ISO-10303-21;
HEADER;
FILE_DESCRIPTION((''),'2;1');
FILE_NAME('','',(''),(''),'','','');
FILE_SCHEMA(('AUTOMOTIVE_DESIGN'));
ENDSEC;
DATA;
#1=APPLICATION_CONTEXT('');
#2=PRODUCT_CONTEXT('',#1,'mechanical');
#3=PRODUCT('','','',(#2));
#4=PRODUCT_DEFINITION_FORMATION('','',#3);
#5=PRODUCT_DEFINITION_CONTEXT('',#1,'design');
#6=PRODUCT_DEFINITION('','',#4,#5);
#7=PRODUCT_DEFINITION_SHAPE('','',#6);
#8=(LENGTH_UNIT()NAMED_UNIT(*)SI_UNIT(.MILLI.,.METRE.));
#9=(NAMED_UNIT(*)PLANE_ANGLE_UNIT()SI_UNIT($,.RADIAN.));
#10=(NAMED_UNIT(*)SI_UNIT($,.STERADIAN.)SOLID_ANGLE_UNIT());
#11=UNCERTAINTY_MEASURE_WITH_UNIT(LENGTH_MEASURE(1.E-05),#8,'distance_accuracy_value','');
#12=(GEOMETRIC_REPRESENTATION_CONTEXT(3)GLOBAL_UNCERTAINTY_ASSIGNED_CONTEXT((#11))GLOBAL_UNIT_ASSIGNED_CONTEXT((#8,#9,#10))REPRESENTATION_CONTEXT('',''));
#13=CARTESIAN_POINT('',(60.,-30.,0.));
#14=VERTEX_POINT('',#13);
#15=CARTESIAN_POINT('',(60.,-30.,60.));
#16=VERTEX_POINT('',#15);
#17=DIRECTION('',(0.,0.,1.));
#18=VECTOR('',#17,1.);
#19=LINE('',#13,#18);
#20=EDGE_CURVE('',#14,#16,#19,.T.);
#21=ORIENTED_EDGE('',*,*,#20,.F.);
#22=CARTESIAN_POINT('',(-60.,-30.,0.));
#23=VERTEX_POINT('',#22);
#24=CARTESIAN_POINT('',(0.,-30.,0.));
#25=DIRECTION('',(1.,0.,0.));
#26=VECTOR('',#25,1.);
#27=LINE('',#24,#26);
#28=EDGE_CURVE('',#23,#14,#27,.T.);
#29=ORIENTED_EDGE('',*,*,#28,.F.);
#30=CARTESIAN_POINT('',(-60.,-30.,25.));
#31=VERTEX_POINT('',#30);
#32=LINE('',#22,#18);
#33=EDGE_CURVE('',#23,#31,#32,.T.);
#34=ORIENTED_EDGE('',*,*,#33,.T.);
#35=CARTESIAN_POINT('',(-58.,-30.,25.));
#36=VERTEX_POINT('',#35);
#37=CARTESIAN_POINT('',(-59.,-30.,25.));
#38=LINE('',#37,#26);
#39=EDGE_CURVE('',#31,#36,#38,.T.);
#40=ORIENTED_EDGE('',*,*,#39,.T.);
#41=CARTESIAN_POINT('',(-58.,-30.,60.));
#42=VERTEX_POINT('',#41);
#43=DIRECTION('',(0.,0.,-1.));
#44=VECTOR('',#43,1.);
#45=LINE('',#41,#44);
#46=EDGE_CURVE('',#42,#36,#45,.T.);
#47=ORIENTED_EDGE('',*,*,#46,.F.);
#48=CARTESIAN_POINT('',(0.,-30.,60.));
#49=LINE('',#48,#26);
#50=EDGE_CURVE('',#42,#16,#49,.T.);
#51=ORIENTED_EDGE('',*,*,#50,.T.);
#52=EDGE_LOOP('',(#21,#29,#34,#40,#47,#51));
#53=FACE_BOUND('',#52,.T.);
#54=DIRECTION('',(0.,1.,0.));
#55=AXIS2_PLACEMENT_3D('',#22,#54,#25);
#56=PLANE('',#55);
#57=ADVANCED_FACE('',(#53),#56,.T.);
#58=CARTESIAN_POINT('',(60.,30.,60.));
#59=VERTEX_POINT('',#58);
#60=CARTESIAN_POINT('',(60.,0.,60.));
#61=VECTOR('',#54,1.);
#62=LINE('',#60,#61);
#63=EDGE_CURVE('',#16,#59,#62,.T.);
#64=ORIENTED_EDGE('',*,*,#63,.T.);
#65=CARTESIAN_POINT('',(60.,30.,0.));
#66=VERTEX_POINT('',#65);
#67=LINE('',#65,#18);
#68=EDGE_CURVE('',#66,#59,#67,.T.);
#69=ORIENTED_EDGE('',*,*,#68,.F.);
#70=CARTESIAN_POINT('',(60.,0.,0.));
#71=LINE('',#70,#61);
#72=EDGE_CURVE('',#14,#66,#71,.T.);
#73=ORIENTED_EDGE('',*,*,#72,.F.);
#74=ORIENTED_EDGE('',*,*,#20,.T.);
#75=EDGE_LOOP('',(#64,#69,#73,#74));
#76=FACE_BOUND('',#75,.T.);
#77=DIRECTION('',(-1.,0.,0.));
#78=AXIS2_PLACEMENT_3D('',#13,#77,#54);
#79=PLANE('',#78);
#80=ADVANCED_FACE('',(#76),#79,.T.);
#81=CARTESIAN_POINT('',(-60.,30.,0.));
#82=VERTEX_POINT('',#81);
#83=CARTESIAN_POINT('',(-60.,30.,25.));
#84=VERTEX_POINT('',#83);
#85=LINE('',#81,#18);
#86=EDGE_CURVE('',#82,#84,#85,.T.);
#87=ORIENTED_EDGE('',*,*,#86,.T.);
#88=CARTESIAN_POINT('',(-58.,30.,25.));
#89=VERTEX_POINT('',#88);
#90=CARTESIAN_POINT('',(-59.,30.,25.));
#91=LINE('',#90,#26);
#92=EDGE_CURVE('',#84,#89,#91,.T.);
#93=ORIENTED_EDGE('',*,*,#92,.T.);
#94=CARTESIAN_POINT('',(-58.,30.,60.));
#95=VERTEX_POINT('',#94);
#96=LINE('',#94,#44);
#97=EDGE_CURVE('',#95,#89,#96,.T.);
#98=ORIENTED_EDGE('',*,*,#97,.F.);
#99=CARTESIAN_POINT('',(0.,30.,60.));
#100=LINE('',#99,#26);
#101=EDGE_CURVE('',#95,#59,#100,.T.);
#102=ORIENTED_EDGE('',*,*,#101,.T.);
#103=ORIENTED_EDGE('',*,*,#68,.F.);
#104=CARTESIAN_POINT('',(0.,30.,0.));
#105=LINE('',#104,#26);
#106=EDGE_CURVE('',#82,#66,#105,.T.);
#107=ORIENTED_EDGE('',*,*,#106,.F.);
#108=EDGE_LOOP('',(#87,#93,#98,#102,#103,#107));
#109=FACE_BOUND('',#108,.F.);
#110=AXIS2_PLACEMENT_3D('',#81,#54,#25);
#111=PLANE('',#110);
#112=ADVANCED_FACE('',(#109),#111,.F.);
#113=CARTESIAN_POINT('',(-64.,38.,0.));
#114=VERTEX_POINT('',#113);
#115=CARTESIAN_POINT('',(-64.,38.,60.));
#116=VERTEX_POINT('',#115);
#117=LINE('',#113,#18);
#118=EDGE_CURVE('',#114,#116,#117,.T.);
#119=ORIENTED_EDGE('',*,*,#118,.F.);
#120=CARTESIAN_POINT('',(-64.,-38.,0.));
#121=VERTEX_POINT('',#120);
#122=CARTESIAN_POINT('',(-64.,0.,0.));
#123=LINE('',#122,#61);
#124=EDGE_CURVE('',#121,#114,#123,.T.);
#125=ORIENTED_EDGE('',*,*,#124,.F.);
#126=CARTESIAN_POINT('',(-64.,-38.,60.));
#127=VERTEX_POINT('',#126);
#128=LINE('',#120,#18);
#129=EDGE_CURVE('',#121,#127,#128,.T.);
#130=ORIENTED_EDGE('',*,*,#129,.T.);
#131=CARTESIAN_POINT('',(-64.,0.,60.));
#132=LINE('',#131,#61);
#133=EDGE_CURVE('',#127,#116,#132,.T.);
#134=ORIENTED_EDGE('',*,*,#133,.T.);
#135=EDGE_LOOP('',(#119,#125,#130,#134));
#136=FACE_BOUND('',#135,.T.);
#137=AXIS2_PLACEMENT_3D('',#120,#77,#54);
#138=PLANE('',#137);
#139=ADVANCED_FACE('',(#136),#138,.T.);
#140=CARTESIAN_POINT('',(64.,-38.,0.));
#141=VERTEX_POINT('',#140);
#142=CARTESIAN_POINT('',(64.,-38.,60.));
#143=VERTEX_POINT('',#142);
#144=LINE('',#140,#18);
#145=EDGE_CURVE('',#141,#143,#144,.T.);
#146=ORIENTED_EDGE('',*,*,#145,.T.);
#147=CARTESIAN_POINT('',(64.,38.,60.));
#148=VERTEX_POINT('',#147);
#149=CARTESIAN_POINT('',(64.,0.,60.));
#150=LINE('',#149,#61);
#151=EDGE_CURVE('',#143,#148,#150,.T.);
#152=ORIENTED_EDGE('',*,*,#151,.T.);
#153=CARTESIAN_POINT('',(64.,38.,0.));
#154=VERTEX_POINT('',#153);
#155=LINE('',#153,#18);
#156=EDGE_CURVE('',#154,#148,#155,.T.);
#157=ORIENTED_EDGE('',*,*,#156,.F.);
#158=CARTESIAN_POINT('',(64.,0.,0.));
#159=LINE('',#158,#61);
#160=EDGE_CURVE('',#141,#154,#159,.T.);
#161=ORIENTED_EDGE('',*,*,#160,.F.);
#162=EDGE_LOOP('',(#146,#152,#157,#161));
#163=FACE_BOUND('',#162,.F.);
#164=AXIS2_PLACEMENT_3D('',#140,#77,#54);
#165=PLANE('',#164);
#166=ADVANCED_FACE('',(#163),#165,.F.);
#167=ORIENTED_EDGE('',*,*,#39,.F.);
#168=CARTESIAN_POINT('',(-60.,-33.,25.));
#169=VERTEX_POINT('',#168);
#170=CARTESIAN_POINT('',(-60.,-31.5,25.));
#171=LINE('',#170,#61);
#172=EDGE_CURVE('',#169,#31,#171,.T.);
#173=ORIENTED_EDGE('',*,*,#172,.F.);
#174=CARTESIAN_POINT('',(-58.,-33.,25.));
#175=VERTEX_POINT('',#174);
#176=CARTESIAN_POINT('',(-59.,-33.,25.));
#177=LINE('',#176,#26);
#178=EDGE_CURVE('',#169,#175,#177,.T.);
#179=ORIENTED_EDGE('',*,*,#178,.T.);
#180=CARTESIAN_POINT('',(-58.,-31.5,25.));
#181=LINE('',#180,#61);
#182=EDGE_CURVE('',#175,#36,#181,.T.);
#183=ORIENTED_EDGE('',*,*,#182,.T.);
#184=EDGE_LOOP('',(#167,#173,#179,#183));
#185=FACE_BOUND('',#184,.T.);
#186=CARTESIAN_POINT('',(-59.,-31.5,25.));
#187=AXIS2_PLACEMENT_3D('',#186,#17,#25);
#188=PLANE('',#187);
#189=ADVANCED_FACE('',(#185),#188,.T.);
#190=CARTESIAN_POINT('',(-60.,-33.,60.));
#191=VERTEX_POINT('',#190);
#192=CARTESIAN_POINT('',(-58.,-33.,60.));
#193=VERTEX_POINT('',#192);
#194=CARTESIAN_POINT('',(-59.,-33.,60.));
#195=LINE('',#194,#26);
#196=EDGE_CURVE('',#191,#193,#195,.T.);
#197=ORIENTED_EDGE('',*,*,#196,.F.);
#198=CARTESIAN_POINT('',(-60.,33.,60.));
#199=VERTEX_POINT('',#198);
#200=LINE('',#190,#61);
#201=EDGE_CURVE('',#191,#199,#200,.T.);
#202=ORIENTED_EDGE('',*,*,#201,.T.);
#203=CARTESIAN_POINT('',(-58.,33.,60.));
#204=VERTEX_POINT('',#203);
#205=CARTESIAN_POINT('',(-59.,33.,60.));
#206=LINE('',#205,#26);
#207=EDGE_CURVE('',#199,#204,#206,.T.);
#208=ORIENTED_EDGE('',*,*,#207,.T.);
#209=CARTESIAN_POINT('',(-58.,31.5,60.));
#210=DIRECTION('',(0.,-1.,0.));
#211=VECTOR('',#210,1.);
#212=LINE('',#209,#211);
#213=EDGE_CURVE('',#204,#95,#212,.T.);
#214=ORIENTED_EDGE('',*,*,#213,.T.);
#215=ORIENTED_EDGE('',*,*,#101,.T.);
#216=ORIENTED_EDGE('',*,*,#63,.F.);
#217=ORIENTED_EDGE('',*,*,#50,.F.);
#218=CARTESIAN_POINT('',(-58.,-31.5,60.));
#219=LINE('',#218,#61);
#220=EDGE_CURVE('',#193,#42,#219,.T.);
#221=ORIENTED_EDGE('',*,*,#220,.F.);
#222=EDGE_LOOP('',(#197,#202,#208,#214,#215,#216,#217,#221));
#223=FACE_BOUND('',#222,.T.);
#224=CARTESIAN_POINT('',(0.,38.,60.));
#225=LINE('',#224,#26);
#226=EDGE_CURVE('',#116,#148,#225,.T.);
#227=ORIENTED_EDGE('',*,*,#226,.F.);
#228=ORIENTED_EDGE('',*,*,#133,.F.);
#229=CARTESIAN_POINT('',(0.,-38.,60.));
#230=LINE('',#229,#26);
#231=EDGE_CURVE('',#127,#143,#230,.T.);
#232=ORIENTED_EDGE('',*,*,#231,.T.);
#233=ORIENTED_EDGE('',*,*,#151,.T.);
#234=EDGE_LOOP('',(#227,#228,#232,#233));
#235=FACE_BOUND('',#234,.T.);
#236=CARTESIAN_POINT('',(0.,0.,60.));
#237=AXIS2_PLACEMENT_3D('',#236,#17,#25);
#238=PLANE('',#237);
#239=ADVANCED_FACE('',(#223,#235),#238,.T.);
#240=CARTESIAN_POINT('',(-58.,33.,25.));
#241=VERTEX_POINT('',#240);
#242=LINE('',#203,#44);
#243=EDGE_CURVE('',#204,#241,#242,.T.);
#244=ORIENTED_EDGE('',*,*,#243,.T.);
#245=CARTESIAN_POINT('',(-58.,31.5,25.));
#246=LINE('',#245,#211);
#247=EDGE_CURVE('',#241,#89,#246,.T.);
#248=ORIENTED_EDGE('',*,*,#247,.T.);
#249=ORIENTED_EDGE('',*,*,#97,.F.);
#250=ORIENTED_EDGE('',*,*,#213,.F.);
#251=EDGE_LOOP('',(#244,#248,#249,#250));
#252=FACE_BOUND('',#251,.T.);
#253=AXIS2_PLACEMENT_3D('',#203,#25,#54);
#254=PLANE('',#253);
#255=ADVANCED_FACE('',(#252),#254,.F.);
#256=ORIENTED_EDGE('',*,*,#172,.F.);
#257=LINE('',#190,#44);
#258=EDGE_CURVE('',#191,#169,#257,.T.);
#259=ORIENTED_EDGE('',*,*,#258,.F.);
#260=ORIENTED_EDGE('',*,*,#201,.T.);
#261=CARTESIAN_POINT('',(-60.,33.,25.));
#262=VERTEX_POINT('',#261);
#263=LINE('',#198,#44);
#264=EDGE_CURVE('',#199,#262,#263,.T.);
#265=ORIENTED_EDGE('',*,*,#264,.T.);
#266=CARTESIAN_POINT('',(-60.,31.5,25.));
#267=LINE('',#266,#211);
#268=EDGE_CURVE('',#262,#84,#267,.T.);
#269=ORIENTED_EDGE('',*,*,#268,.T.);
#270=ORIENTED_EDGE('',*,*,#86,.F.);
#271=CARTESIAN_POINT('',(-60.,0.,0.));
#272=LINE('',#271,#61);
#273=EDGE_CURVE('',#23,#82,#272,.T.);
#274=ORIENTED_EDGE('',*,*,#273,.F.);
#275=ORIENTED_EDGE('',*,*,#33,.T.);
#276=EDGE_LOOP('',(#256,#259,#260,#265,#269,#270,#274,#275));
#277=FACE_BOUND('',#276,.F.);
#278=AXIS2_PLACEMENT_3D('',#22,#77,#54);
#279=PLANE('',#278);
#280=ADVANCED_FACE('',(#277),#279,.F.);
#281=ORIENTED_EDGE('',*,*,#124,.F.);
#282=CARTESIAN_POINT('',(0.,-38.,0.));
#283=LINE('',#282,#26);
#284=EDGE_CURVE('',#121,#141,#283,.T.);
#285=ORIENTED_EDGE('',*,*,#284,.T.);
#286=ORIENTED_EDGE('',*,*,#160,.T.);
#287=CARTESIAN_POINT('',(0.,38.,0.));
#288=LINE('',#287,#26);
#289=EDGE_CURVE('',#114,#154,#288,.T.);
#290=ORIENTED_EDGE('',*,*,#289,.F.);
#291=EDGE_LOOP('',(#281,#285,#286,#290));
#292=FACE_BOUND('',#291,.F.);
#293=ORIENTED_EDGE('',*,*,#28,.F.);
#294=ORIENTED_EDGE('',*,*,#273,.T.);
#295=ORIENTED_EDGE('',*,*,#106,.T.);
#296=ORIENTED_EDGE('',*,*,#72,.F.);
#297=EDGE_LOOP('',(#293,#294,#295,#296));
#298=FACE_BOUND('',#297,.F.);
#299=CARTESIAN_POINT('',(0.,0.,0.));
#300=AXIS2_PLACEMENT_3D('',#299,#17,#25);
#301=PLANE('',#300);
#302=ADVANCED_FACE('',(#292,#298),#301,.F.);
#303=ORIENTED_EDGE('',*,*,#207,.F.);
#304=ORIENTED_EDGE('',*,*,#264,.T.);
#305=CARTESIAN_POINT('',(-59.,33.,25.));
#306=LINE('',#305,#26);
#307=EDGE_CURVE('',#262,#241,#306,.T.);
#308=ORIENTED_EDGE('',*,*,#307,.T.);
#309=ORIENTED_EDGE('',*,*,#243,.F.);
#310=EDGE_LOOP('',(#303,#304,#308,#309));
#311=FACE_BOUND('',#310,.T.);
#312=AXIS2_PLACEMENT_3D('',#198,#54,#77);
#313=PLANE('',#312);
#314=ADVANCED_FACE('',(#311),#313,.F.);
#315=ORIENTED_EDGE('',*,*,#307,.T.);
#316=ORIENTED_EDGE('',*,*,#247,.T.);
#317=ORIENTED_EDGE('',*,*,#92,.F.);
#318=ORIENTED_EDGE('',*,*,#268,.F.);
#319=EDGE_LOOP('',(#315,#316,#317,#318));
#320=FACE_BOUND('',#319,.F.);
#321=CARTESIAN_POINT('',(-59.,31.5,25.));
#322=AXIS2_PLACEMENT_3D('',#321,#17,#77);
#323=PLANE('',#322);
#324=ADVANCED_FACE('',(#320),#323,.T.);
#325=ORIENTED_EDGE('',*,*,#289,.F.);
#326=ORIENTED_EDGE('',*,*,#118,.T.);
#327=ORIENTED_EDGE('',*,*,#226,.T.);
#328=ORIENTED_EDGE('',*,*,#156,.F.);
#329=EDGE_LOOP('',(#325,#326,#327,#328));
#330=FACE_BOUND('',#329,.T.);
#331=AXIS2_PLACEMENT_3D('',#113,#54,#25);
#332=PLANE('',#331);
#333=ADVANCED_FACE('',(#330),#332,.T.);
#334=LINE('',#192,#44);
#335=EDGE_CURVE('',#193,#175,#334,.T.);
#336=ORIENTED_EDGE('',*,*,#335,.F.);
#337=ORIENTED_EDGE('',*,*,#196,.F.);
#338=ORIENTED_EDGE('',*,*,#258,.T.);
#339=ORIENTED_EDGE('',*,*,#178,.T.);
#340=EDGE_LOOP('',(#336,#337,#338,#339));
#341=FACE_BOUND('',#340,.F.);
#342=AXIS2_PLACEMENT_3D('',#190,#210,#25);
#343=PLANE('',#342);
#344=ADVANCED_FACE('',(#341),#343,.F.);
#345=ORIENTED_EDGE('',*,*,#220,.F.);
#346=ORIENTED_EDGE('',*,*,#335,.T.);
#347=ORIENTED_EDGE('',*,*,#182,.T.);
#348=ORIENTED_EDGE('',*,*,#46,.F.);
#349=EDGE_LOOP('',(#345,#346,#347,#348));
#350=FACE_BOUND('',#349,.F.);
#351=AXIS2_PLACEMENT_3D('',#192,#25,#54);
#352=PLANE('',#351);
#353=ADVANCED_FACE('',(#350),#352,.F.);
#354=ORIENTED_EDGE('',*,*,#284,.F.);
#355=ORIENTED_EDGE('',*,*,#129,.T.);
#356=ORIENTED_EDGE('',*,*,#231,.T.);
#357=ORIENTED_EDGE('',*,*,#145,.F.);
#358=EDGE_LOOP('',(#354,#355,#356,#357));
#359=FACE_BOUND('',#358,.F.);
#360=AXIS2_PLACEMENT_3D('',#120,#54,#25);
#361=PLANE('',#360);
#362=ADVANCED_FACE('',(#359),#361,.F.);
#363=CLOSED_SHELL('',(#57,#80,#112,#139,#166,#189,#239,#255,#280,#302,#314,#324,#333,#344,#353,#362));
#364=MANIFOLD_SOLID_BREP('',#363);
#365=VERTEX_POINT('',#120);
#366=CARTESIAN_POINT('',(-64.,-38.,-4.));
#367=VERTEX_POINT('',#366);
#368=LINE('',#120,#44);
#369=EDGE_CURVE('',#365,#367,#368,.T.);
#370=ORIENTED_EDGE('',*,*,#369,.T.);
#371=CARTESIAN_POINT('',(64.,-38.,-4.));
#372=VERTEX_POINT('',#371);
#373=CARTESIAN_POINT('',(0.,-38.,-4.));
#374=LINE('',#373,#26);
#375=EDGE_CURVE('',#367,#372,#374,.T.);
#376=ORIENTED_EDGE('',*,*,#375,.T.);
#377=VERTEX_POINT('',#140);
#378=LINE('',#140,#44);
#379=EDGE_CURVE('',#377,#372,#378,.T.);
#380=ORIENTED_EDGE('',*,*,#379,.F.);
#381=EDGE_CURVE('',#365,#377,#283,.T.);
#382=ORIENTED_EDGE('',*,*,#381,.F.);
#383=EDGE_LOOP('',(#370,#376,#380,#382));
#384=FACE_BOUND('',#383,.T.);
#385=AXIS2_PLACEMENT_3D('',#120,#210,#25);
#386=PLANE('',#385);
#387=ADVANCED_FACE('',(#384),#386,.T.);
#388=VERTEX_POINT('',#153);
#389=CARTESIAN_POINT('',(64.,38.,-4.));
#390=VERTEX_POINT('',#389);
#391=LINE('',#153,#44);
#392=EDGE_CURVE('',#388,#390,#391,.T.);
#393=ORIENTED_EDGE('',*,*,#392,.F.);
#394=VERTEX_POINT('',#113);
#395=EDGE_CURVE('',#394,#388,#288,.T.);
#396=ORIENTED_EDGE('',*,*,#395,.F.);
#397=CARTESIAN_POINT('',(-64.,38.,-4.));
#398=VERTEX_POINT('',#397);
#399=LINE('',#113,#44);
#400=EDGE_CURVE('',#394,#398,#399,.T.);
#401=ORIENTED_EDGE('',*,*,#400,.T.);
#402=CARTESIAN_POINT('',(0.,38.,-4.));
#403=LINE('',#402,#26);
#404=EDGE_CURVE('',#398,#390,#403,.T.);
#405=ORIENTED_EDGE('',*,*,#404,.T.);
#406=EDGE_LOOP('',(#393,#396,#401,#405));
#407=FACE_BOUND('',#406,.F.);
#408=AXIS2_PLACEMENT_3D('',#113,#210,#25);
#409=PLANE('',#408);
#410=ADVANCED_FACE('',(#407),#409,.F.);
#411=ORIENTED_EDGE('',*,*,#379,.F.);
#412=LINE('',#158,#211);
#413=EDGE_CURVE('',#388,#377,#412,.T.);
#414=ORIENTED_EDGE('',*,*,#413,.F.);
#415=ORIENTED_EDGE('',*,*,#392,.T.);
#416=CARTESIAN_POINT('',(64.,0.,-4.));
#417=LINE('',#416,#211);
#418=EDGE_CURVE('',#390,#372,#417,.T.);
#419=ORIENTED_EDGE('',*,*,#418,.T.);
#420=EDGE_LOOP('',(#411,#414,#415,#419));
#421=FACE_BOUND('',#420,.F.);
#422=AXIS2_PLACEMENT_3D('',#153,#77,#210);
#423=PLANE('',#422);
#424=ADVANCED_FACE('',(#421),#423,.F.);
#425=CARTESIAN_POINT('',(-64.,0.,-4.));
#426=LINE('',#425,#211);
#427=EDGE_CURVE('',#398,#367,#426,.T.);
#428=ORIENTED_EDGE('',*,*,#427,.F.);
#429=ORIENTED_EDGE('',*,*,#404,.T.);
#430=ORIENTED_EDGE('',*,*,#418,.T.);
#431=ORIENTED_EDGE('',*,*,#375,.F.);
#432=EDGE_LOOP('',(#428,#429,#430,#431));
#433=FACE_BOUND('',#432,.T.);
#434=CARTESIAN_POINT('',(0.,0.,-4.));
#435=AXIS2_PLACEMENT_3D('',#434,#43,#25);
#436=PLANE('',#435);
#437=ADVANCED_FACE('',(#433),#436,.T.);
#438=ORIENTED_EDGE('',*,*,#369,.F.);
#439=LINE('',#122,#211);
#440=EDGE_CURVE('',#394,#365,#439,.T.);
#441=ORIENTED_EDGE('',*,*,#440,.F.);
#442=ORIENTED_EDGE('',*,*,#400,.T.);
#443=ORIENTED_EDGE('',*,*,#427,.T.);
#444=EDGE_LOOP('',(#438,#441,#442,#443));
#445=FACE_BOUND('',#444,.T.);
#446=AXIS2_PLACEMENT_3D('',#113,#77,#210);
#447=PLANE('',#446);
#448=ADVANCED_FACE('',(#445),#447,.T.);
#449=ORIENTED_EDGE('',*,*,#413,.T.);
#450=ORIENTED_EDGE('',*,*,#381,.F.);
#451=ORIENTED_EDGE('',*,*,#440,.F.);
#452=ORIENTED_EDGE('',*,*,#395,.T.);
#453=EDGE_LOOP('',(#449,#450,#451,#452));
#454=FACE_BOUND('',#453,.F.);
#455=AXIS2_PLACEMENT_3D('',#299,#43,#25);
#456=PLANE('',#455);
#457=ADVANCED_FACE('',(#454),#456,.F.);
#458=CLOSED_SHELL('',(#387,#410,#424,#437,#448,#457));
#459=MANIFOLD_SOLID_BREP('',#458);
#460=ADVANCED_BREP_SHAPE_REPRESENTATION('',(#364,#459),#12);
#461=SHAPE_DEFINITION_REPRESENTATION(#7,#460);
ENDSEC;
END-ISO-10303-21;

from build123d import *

# Parameters (mm, degrees)
F0_W     = 128
F0_H     = 76
F0_W_2   = 120
F0_H_2   = 60
F1_DEPTH = 60
F2_W     = 2
F2_H     = 3
F3_DEPTH = 35
F4_W     = 128
F4_H     = 76
F5_DEPTH = 4


# Not quite as in the source:
# - a pattern or mirror of a feature is missing from the dataset's text; its kind, count and spacing are read off the source's solid


with BuildPart() as f1:
    # F0 (on Top) → F1 (new body)
    with BuildSketch(Plane.XY):
        Rectangle(F0_W, F0_H)
        Rectangle(F0_W_2, F0_H_2, mode=Mode.SUBTRACT)
    extrude(amount=F1_DEPTH)

    # F2 (on face) → F3 (cut)
    with BuildSketch(Plane.XY.offset(60)):
        with Locations((-59, -31.5)):
            Rectangle(F2_W, F2_H)
    f3 = extrude(amount=-F3_DEPTH, mode=Mode.SUBTRACT)

    # F3_copies: F3 across plane
    add(f3.mirror(Plane.ZX), mode=Mode.SUBTRACT)


with BuildPart() as f5:
    # F4 (on face) → F5 (new body)
    with BuildSketch(Plane(origin=(0, 0, 0), x_dir=(1, 0, 0), z_dir=(0, 0, -1))):
        Rectangle(F4_W, F4_H)
    extrude(amount=F5_DEPTH)


solid = Compound([f1.part, f5.part])
